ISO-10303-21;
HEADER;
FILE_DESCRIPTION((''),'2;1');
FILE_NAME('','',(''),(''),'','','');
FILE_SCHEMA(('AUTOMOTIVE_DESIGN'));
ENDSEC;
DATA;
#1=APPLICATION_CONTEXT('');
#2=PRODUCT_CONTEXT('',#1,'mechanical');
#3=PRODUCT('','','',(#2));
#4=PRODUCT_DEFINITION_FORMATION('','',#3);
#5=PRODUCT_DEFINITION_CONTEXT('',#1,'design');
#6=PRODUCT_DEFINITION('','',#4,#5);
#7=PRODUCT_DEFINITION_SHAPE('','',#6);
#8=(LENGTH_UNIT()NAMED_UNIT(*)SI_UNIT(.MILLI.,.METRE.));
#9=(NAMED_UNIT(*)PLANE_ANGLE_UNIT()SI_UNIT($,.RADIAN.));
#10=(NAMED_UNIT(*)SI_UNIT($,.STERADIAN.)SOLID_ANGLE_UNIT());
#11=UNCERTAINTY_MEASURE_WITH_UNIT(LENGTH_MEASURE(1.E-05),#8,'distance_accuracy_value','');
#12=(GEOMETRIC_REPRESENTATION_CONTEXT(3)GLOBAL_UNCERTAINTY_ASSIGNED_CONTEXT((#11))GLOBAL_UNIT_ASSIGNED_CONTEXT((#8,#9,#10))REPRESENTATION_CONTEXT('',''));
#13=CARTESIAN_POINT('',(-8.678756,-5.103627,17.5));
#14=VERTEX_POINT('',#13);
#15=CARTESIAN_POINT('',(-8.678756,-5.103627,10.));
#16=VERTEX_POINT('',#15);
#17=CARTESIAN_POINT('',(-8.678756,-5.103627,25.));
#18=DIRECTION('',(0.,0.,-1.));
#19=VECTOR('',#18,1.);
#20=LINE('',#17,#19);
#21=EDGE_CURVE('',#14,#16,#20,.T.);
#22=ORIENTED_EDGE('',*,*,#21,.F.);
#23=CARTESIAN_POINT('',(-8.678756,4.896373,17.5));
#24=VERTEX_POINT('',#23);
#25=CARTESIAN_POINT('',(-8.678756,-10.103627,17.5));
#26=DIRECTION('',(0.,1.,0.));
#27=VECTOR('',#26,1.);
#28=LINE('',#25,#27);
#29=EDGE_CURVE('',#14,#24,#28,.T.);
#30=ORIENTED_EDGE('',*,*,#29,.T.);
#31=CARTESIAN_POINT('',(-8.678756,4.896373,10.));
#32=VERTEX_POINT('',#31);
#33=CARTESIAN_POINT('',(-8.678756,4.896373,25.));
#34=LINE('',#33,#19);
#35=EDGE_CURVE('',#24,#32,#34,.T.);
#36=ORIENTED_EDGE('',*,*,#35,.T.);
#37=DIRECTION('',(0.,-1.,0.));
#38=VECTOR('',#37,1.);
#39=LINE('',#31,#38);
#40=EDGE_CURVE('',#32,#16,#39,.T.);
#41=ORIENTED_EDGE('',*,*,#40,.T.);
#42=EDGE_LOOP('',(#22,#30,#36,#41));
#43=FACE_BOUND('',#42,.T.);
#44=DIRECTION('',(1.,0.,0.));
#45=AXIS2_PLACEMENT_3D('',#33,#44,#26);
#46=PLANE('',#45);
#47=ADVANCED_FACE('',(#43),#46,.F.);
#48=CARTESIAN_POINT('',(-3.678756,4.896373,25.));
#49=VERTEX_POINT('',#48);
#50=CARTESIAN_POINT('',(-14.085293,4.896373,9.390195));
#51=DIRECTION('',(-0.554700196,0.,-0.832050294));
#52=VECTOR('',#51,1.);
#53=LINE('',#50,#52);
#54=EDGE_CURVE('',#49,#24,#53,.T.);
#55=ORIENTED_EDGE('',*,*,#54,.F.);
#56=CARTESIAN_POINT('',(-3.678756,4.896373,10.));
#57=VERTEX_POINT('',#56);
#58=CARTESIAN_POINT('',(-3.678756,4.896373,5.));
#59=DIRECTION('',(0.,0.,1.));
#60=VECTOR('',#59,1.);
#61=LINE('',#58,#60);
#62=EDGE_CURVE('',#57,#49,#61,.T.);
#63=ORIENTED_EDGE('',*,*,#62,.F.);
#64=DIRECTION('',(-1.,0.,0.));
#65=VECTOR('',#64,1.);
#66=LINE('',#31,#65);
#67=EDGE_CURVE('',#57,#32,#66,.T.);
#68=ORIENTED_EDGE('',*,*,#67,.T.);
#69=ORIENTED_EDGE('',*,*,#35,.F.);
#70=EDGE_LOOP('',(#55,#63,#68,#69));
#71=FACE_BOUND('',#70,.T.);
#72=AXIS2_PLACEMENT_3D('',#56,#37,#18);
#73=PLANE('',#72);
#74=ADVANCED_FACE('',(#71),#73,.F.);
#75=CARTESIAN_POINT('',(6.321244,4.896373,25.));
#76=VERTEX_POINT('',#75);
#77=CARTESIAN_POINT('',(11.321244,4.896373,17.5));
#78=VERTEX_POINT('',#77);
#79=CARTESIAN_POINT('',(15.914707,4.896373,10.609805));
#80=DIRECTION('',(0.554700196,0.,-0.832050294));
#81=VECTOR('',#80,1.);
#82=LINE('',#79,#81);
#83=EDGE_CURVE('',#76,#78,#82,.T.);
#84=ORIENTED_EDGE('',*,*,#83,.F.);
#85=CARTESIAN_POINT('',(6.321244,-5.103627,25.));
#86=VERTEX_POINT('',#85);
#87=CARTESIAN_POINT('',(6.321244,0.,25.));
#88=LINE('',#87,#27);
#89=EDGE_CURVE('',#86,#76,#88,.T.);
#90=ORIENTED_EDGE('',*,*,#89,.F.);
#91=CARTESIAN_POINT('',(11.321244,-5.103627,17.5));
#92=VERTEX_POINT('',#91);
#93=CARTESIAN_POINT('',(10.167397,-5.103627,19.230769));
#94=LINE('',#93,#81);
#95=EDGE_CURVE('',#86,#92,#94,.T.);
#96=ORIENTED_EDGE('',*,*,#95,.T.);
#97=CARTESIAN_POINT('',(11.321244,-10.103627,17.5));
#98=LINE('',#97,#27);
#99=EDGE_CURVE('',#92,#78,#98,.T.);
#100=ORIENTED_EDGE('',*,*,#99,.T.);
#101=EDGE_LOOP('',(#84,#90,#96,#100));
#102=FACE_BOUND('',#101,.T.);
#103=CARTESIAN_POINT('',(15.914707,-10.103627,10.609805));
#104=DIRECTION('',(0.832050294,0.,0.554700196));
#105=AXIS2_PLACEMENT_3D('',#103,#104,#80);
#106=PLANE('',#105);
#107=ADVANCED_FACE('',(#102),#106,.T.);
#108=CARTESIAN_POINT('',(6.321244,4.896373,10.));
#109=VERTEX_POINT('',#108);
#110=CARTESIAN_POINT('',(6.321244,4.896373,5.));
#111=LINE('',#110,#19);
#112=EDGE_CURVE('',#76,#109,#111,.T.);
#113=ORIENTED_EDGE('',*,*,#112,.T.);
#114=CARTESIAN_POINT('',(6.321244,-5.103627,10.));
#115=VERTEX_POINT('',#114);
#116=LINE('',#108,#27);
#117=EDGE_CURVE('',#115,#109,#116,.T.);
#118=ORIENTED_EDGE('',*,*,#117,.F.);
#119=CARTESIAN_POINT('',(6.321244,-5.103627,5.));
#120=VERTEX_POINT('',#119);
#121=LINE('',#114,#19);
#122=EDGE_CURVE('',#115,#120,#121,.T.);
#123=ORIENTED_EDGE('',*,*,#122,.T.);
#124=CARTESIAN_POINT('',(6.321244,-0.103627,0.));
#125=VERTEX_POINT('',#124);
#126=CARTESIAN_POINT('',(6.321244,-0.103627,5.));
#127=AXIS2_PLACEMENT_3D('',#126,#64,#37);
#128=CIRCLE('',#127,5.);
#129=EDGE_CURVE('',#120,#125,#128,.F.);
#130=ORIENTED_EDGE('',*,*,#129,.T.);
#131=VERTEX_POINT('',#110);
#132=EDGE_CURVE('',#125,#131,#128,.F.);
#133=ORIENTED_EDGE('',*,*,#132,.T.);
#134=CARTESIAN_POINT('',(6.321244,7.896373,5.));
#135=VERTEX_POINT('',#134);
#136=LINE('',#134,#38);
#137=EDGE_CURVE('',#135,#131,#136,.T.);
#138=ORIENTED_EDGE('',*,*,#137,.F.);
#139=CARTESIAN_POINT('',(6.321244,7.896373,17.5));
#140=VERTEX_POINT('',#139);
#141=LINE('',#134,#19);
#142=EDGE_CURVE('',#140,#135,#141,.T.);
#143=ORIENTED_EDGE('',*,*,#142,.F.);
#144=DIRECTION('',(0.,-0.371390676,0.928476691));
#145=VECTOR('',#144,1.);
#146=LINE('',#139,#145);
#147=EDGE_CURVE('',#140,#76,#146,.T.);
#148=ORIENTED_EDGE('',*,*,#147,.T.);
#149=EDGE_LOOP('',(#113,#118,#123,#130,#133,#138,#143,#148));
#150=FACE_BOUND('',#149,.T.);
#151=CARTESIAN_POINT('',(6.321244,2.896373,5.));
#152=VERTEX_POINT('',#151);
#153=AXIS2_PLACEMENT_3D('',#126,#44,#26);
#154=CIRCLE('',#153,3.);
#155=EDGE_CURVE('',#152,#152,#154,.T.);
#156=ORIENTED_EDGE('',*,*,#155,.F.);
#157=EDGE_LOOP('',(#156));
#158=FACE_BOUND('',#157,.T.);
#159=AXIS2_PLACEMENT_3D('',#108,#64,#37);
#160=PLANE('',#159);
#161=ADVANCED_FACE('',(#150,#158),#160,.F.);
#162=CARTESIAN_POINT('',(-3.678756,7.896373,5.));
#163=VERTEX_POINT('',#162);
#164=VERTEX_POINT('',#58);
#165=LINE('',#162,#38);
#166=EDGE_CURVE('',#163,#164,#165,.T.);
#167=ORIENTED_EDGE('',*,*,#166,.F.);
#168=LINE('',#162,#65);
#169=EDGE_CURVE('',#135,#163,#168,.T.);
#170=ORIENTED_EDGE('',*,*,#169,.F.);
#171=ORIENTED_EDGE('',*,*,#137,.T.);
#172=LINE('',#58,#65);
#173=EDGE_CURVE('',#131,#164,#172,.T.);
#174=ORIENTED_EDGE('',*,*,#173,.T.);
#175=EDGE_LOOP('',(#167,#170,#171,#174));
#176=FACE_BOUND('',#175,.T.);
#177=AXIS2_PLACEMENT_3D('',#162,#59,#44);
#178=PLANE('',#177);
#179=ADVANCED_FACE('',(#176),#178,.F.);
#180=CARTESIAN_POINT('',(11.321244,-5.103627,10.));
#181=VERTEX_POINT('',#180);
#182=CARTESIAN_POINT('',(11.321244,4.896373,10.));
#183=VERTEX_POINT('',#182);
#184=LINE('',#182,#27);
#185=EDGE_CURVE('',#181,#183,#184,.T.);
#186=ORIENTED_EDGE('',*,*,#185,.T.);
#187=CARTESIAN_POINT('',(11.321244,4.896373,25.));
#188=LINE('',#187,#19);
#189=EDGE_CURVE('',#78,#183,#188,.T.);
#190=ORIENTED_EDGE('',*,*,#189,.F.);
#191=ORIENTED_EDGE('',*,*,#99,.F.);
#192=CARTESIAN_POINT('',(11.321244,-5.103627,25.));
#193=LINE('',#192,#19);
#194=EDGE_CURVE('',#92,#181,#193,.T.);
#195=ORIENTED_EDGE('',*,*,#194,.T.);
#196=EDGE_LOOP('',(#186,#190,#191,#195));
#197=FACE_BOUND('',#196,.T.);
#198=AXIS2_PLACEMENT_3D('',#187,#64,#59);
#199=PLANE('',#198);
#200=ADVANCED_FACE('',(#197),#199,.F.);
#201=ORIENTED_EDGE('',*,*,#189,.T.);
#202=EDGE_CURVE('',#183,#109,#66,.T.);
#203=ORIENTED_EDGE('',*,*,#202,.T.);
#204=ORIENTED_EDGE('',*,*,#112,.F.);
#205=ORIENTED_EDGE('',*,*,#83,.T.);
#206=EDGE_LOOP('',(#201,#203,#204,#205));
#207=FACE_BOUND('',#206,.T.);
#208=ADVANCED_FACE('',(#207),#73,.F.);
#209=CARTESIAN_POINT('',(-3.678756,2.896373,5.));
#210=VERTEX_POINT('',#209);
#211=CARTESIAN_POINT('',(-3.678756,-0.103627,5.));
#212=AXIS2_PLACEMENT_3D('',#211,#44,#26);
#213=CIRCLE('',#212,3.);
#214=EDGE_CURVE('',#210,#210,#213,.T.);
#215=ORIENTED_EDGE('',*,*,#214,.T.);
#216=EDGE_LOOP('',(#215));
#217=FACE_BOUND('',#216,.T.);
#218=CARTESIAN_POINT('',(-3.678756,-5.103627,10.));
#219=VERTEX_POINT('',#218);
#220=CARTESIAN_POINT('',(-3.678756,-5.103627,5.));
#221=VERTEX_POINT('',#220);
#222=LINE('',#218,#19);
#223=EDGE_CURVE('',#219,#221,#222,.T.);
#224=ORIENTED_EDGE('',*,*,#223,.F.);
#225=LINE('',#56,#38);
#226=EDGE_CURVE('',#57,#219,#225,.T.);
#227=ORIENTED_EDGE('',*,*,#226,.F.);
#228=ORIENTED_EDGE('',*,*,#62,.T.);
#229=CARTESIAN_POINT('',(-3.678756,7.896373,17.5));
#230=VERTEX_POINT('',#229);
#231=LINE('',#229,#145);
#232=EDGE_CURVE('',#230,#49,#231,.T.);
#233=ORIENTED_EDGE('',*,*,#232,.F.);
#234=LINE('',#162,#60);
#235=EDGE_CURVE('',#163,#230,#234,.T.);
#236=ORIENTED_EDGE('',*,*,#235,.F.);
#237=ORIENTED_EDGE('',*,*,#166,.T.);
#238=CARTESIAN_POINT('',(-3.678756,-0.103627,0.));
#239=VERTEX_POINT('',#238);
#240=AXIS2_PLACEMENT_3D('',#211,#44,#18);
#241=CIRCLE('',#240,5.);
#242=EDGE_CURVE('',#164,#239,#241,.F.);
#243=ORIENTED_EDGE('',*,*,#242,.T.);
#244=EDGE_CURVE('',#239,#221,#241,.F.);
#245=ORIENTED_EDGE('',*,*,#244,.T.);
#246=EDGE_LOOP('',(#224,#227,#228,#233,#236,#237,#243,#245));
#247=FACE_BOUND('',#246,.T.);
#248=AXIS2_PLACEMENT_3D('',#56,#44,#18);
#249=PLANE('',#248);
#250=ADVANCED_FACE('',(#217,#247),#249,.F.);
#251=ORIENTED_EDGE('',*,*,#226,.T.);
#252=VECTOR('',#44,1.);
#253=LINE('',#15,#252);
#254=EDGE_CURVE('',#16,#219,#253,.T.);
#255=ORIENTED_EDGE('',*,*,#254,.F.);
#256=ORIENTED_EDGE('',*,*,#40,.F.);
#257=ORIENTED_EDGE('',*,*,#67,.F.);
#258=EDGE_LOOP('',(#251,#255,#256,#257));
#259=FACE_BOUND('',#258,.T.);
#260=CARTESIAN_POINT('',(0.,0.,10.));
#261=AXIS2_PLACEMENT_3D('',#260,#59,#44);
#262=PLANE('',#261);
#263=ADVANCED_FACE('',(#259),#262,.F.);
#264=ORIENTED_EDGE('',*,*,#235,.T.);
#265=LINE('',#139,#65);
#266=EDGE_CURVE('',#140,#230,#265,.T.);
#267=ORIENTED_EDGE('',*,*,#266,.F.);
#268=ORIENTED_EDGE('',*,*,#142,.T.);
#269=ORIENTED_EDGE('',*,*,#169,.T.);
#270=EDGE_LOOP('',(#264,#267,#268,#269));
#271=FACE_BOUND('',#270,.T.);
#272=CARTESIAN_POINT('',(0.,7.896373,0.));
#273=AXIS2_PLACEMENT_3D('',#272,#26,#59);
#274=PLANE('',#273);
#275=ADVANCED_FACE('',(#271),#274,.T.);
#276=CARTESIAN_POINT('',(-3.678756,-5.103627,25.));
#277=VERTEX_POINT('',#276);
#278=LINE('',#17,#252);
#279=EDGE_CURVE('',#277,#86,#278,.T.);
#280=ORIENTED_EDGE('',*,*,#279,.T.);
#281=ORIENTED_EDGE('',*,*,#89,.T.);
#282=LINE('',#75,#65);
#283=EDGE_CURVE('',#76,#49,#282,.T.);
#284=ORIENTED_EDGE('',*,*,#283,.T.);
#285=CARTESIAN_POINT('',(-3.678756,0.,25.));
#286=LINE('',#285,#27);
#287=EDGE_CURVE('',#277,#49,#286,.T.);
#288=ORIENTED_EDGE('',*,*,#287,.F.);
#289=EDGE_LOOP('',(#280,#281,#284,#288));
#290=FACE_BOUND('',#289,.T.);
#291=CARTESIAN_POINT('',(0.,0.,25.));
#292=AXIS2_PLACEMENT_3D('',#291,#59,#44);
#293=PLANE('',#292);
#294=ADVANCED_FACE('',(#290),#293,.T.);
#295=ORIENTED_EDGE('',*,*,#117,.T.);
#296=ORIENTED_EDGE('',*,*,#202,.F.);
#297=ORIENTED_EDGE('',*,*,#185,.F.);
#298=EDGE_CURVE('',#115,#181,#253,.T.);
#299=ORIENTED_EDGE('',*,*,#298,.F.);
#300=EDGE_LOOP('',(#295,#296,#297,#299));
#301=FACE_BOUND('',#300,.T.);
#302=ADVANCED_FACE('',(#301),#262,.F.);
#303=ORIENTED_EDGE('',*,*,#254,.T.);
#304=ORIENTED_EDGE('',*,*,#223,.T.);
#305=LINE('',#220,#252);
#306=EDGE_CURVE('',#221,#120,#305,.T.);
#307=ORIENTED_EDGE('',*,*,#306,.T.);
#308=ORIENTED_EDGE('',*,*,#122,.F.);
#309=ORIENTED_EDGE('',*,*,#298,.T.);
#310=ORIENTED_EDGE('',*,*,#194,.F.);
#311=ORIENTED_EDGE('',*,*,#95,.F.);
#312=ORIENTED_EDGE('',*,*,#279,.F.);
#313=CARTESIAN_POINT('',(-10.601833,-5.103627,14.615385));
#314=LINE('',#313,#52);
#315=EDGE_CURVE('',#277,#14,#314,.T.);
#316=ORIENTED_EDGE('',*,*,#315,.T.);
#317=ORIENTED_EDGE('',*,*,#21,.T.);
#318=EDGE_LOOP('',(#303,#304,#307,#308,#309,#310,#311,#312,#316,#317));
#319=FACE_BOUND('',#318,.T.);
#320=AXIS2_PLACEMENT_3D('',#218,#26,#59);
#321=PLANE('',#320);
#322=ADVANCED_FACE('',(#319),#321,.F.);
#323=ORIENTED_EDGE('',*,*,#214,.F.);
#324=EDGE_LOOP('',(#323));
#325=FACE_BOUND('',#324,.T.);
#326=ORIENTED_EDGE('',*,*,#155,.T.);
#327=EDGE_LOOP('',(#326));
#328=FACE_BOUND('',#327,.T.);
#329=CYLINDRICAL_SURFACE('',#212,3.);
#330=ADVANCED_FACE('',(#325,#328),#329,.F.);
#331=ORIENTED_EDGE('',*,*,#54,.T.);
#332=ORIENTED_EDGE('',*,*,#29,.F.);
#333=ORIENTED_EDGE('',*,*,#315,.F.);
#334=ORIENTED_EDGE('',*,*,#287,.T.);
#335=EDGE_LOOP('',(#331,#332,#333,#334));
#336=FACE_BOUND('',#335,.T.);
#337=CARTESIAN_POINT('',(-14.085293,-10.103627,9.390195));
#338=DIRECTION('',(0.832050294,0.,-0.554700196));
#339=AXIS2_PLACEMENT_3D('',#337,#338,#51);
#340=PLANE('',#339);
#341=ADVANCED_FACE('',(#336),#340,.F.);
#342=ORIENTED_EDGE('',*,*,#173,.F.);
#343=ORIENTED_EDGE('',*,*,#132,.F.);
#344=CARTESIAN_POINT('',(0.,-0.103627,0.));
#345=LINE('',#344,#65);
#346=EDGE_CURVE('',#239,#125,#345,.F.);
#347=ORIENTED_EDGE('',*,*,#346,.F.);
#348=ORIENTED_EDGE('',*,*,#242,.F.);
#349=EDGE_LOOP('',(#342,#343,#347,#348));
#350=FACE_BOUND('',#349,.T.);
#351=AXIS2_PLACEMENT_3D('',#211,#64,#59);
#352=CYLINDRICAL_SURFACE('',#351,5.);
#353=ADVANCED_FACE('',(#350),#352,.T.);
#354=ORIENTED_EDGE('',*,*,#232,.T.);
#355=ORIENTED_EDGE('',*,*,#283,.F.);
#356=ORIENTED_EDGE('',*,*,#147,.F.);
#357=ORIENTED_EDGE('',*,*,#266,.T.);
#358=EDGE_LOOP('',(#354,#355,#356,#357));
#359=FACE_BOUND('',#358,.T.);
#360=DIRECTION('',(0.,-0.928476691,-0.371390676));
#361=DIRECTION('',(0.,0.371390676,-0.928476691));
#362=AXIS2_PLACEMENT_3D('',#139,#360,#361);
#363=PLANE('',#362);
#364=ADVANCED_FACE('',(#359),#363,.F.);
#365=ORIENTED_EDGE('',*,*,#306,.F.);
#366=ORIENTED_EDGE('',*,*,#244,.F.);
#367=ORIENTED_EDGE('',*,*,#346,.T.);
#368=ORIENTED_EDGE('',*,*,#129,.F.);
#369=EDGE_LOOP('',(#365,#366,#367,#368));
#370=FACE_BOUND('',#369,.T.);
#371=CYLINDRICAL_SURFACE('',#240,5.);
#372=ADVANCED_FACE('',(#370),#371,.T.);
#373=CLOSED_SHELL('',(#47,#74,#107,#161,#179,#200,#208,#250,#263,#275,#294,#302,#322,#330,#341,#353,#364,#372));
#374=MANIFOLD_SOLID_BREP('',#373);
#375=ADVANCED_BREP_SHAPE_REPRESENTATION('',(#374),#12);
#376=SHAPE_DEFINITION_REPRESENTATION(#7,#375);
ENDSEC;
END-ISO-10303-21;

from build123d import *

# Parameters (mm, degrees)
SKETCH1_W           = 10
SKETCH1_H           = 10
BOSS_EXTRUDE1_DEPTH = 10
SKETCH2_R           = 3
CUT_EXTRUDE1_DEPTH  = 10
FILLET2_R           = 5
SKETCH3_W           = 20
SKETCH3_H           = 10
BOSS_EXTRUDE3_DEPTH = 15
CUT_EXTRUDE2_DEPTH  = 15
SKETCH5_W           = 10
SKETCH5_H           = 20
BOSS_EXTRUDE4_DEPTH = 3
CUT_EXTRUDE3_DEPTH  = 10


with BuildPart() as part:
    # Sketch1 → Boss-Extrude1 (new body)
    with BuildSketch(Plane.XY):
        with Locations((1.321243523, -0.103626943)):
            Rectangle(SKETCH1_W, SKETCH1_H)
    extrude(amount=BOSS_EXTRUDE1_DEPTH)

    # Sketch2 → Cut-Extrude1 (cut)
    with BuildSketch(Plane(origin=(6.321243523, 0, 0), x_dir=(0, 0, -1), z_dir=(1, 0, 0))):
        with Locations(Location((-5, -0.103626943, 0), (0, 0, 90))):
            Circle(SKETCH2_R)
    extrude(amount=-CUT_EXTRUDE1_DEPTH, mode=Mode.SUBTRACT)

    # Fillet2
    fillet2_edges = [part.edges().sort_by_distance(p)[0] for p in [
        (1.321243523, -5.103626943, 0),
        (1.321243523, 4.896373057, 0),
    ]]
    fillet(fillet2_edges, radius=FILLET2_R - 0.0001)  # a hair under: the kernel refuses the full size

    # Sketch3 → Boss-Extrude3 (add)
    with BuildSketch(Plane.XY.offset(10)):
        with Locations((1.321243523, -0.103626943)):
            Rectangle(SKETCH3_W, SKETCH3_H)
    extrude(amount=BOSS_EXTRUDE3_DEPTH)

    # Sketch4 → Cut-Extrude2 (cut)
    with BuildSketch(Plane(origin=(0, 4.896373057, 0), x_dir=(1, 0, 0), z_dir=(0, 1, 0))):
        Polygon((11.321243523, -17.5), (6.321243523, -25), (11.321243523, -25), align=None)
        Polygon((-8.678756477, -25), (-3.678756477, -25), (-8.678756477, -17.5), align=None)
    extrude(amount=-CUT_EXTRUDE2_DEPTH, mode=Mode.SUBTRACT)

    # Sketch5 → Boss-Extrude4 (add)
    with BuildSketch(Plane(origin=(0, 4.896373057, 0), x_dir=(1, 0, 0), z_dir=(0, 1, 0))):
        with Locations((1.321243523, -15)):
            Rectangle(SKETCH5_W, SKETCH5_H)
    extrude(amount=BOSS_EXTRUDE4_DEPTH)

    # Sketch6 → Cut-Extrude3 (cut)
    with BuildSketch(Plane.ZY.offset(3.678756477)):
        Polygon((17.5, 7.896373057), (25, 4.896373057), (25, 7.896373057), align=None)
    extrude(amount=-CUT_EXTRUDE3_DEPTH, mode=Mode.SUBTRACT)


solid = part.part
